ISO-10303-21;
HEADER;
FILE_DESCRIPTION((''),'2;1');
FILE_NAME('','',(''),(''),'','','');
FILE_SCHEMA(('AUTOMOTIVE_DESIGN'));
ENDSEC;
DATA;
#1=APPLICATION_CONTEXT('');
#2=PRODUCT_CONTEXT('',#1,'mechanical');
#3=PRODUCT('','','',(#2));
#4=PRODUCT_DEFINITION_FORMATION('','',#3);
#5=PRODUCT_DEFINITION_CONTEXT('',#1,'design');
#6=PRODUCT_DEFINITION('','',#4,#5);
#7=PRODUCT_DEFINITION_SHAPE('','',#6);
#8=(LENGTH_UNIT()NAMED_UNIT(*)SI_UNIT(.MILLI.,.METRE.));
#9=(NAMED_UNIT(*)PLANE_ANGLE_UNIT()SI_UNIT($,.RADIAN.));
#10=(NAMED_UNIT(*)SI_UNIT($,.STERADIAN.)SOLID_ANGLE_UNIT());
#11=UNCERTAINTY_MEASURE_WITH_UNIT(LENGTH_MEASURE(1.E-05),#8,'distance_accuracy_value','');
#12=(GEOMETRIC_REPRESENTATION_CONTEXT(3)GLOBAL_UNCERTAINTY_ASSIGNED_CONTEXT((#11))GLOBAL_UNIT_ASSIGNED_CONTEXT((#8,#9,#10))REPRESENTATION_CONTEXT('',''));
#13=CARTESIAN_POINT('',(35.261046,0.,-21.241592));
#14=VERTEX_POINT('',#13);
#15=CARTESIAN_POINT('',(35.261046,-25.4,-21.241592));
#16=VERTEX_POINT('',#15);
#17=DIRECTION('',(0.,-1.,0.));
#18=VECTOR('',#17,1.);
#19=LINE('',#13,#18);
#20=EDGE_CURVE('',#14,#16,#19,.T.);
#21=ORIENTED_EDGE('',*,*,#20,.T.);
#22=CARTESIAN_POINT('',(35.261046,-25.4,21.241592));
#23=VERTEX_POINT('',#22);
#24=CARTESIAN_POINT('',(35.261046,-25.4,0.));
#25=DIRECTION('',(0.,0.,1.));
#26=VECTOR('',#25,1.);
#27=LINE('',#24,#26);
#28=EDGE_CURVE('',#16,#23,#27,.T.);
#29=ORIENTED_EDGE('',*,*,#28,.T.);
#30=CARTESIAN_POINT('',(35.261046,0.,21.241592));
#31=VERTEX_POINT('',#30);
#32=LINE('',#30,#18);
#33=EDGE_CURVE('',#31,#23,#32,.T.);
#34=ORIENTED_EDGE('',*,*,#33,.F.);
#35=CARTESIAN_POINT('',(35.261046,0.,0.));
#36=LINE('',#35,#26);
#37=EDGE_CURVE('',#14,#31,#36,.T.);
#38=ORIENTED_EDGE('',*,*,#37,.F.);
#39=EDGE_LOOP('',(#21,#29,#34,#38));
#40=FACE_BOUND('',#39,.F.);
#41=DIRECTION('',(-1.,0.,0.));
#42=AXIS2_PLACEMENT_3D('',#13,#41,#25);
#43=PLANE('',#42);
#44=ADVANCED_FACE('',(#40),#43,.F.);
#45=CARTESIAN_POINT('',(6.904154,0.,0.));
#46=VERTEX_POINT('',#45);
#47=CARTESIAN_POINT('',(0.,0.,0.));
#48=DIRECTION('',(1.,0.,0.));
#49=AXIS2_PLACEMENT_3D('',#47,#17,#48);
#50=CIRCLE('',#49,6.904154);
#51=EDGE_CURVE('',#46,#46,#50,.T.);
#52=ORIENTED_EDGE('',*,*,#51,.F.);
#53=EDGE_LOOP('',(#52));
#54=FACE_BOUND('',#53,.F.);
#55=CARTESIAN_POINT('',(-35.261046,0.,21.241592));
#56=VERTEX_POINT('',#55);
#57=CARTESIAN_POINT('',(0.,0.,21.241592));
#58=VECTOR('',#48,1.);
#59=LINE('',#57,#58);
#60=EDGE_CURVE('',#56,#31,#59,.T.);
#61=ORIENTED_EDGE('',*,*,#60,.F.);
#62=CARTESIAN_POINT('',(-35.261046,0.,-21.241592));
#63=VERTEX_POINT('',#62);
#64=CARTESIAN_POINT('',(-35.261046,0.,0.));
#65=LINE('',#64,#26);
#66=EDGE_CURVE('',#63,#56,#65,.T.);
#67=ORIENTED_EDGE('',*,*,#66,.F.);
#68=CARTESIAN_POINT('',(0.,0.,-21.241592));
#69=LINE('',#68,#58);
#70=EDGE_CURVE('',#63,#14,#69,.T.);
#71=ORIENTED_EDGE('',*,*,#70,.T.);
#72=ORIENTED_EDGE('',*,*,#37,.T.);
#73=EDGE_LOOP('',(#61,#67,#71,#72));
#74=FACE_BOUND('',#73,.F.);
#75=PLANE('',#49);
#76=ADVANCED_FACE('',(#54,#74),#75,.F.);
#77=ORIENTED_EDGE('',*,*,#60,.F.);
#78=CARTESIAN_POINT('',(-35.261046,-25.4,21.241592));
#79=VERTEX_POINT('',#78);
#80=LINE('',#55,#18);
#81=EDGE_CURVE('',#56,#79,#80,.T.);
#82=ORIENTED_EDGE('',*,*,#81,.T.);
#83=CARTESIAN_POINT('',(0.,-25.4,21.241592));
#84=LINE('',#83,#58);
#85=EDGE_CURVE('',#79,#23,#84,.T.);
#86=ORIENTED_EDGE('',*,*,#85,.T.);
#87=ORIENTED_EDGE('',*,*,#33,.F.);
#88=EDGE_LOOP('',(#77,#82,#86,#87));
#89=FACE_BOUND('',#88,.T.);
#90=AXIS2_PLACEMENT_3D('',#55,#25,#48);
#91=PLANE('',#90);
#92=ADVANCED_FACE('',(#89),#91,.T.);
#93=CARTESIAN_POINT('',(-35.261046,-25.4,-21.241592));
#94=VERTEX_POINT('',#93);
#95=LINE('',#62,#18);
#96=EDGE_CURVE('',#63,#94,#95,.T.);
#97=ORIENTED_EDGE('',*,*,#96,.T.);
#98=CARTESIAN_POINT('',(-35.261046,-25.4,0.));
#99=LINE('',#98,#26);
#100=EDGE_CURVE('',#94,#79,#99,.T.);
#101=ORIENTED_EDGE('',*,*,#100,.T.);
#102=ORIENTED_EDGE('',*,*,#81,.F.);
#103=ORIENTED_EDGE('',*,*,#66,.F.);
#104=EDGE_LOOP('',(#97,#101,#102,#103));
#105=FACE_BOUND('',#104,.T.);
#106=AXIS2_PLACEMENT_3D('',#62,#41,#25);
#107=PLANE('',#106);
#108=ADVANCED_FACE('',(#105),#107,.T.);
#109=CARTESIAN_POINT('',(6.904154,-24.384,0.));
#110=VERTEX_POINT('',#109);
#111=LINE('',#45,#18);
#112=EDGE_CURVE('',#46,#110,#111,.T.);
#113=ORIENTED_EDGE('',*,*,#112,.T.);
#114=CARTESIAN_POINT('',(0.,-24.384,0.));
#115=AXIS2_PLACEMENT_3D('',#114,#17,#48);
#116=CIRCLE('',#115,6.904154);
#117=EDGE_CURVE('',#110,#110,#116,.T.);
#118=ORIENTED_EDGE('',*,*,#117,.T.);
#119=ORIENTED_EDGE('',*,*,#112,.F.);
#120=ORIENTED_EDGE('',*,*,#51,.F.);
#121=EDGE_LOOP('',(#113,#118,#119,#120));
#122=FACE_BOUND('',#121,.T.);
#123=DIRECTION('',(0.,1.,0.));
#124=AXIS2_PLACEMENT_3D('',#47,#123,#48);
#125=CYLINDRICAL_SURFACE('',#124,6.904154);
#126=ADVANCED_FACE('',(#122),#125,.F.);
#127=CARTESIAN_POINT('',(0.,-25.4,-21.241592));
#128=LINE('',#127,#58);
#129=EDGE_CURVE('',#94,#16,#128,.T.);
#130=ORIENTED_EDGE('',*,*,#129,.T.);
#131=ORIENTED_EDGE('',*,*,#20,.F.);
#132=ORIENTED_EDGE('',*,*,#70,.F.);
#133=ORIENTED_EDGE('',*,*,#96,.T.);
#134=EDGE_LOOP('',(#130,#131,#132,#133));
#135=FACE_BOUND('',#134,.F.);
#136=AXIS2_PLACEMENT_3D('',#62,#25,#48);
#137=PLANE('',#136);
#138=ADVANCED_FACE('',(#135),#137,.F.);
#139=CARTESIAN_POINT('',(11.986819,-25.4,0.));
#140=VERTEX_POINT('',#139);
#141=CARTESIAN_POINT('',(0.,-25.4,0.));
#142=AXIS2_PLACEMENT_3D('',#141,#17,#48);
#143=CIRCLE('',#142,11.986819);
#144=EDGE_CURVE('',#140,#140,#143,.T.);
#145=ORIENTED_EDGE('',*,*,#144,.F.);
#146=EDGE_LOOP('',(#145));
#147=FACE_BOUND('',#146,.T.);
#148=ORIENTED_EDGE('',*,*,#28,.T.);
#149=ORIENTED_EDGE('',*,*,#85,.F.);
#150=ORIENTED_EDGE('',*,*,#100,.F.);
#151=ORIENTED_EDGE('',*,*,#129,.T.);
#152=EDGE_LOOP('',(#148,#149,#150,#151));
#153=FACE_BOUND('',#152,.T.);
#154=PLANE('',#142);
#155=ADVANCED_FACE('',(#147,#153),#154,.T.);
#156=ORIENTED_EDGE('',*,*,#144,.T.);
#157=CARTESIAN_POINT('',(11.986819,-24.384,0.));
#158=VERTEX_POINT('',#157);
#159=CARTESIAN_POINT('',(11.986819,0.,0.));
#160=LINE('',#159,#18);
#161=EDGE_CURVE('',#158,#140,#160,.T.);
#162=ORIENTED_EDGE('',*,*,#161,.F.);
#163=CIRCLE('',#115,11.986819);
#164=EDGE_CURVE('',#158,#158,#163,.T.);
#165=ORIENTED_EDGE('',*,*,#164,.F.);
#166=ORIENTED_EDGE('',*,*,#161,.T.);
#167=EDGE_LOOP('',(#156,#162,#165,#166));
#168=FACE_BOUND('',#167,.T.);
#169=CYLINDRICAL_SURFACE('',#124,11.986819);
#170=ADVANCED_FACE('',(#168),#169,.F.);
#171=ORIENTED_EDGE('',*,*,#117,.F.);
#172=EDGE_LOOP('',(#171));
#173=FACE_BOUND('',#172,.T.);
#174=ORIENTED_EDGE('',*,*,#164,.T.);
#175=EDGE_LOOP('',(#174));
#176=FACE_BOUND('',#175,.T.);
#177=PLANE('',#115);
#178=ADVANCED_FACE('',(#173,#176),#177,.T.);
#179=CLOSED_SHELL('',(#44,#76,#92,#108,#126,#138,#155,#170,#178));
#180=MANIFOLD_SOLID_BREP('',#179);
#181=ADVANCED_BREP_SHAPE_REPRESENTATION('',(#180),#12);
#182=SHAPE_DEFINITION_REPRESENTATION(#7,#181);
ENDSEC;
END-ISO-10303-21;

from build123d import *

# Parameters (mm, degrees)
F0_R     = 11.9868187185
F0_R_2   = 6.9041541384
F1_DEPTH = 24.384
F0_W     = 70.5220922828
F0_H     = 42.4831844866
F2_DEPTH = 25.4


# Not quite as in the source:
# - the program builds the solid bodies; features that only make, move or delete a surface that nothing else refers to are left out


with BuildPart() as f1:
    # F0 (on Front) → F1 (new body)
    with BuildSketch(Plane.XZ):
        Circle(F0_R)
        Circle(F0_R_2, mode=Mode.SUBTRACT)
    extrude(amount=F1_DEPTH)

    # F0 (on Front) → F2 (join)
    with BuildSketch(Plane.XZ):
        Rectangle(F0_W, F0_H)
        Circle(F0_R, mode=Mode.SUBTRACT)
    extrude(amount=F2_DEPTH)


solid = f1.part
